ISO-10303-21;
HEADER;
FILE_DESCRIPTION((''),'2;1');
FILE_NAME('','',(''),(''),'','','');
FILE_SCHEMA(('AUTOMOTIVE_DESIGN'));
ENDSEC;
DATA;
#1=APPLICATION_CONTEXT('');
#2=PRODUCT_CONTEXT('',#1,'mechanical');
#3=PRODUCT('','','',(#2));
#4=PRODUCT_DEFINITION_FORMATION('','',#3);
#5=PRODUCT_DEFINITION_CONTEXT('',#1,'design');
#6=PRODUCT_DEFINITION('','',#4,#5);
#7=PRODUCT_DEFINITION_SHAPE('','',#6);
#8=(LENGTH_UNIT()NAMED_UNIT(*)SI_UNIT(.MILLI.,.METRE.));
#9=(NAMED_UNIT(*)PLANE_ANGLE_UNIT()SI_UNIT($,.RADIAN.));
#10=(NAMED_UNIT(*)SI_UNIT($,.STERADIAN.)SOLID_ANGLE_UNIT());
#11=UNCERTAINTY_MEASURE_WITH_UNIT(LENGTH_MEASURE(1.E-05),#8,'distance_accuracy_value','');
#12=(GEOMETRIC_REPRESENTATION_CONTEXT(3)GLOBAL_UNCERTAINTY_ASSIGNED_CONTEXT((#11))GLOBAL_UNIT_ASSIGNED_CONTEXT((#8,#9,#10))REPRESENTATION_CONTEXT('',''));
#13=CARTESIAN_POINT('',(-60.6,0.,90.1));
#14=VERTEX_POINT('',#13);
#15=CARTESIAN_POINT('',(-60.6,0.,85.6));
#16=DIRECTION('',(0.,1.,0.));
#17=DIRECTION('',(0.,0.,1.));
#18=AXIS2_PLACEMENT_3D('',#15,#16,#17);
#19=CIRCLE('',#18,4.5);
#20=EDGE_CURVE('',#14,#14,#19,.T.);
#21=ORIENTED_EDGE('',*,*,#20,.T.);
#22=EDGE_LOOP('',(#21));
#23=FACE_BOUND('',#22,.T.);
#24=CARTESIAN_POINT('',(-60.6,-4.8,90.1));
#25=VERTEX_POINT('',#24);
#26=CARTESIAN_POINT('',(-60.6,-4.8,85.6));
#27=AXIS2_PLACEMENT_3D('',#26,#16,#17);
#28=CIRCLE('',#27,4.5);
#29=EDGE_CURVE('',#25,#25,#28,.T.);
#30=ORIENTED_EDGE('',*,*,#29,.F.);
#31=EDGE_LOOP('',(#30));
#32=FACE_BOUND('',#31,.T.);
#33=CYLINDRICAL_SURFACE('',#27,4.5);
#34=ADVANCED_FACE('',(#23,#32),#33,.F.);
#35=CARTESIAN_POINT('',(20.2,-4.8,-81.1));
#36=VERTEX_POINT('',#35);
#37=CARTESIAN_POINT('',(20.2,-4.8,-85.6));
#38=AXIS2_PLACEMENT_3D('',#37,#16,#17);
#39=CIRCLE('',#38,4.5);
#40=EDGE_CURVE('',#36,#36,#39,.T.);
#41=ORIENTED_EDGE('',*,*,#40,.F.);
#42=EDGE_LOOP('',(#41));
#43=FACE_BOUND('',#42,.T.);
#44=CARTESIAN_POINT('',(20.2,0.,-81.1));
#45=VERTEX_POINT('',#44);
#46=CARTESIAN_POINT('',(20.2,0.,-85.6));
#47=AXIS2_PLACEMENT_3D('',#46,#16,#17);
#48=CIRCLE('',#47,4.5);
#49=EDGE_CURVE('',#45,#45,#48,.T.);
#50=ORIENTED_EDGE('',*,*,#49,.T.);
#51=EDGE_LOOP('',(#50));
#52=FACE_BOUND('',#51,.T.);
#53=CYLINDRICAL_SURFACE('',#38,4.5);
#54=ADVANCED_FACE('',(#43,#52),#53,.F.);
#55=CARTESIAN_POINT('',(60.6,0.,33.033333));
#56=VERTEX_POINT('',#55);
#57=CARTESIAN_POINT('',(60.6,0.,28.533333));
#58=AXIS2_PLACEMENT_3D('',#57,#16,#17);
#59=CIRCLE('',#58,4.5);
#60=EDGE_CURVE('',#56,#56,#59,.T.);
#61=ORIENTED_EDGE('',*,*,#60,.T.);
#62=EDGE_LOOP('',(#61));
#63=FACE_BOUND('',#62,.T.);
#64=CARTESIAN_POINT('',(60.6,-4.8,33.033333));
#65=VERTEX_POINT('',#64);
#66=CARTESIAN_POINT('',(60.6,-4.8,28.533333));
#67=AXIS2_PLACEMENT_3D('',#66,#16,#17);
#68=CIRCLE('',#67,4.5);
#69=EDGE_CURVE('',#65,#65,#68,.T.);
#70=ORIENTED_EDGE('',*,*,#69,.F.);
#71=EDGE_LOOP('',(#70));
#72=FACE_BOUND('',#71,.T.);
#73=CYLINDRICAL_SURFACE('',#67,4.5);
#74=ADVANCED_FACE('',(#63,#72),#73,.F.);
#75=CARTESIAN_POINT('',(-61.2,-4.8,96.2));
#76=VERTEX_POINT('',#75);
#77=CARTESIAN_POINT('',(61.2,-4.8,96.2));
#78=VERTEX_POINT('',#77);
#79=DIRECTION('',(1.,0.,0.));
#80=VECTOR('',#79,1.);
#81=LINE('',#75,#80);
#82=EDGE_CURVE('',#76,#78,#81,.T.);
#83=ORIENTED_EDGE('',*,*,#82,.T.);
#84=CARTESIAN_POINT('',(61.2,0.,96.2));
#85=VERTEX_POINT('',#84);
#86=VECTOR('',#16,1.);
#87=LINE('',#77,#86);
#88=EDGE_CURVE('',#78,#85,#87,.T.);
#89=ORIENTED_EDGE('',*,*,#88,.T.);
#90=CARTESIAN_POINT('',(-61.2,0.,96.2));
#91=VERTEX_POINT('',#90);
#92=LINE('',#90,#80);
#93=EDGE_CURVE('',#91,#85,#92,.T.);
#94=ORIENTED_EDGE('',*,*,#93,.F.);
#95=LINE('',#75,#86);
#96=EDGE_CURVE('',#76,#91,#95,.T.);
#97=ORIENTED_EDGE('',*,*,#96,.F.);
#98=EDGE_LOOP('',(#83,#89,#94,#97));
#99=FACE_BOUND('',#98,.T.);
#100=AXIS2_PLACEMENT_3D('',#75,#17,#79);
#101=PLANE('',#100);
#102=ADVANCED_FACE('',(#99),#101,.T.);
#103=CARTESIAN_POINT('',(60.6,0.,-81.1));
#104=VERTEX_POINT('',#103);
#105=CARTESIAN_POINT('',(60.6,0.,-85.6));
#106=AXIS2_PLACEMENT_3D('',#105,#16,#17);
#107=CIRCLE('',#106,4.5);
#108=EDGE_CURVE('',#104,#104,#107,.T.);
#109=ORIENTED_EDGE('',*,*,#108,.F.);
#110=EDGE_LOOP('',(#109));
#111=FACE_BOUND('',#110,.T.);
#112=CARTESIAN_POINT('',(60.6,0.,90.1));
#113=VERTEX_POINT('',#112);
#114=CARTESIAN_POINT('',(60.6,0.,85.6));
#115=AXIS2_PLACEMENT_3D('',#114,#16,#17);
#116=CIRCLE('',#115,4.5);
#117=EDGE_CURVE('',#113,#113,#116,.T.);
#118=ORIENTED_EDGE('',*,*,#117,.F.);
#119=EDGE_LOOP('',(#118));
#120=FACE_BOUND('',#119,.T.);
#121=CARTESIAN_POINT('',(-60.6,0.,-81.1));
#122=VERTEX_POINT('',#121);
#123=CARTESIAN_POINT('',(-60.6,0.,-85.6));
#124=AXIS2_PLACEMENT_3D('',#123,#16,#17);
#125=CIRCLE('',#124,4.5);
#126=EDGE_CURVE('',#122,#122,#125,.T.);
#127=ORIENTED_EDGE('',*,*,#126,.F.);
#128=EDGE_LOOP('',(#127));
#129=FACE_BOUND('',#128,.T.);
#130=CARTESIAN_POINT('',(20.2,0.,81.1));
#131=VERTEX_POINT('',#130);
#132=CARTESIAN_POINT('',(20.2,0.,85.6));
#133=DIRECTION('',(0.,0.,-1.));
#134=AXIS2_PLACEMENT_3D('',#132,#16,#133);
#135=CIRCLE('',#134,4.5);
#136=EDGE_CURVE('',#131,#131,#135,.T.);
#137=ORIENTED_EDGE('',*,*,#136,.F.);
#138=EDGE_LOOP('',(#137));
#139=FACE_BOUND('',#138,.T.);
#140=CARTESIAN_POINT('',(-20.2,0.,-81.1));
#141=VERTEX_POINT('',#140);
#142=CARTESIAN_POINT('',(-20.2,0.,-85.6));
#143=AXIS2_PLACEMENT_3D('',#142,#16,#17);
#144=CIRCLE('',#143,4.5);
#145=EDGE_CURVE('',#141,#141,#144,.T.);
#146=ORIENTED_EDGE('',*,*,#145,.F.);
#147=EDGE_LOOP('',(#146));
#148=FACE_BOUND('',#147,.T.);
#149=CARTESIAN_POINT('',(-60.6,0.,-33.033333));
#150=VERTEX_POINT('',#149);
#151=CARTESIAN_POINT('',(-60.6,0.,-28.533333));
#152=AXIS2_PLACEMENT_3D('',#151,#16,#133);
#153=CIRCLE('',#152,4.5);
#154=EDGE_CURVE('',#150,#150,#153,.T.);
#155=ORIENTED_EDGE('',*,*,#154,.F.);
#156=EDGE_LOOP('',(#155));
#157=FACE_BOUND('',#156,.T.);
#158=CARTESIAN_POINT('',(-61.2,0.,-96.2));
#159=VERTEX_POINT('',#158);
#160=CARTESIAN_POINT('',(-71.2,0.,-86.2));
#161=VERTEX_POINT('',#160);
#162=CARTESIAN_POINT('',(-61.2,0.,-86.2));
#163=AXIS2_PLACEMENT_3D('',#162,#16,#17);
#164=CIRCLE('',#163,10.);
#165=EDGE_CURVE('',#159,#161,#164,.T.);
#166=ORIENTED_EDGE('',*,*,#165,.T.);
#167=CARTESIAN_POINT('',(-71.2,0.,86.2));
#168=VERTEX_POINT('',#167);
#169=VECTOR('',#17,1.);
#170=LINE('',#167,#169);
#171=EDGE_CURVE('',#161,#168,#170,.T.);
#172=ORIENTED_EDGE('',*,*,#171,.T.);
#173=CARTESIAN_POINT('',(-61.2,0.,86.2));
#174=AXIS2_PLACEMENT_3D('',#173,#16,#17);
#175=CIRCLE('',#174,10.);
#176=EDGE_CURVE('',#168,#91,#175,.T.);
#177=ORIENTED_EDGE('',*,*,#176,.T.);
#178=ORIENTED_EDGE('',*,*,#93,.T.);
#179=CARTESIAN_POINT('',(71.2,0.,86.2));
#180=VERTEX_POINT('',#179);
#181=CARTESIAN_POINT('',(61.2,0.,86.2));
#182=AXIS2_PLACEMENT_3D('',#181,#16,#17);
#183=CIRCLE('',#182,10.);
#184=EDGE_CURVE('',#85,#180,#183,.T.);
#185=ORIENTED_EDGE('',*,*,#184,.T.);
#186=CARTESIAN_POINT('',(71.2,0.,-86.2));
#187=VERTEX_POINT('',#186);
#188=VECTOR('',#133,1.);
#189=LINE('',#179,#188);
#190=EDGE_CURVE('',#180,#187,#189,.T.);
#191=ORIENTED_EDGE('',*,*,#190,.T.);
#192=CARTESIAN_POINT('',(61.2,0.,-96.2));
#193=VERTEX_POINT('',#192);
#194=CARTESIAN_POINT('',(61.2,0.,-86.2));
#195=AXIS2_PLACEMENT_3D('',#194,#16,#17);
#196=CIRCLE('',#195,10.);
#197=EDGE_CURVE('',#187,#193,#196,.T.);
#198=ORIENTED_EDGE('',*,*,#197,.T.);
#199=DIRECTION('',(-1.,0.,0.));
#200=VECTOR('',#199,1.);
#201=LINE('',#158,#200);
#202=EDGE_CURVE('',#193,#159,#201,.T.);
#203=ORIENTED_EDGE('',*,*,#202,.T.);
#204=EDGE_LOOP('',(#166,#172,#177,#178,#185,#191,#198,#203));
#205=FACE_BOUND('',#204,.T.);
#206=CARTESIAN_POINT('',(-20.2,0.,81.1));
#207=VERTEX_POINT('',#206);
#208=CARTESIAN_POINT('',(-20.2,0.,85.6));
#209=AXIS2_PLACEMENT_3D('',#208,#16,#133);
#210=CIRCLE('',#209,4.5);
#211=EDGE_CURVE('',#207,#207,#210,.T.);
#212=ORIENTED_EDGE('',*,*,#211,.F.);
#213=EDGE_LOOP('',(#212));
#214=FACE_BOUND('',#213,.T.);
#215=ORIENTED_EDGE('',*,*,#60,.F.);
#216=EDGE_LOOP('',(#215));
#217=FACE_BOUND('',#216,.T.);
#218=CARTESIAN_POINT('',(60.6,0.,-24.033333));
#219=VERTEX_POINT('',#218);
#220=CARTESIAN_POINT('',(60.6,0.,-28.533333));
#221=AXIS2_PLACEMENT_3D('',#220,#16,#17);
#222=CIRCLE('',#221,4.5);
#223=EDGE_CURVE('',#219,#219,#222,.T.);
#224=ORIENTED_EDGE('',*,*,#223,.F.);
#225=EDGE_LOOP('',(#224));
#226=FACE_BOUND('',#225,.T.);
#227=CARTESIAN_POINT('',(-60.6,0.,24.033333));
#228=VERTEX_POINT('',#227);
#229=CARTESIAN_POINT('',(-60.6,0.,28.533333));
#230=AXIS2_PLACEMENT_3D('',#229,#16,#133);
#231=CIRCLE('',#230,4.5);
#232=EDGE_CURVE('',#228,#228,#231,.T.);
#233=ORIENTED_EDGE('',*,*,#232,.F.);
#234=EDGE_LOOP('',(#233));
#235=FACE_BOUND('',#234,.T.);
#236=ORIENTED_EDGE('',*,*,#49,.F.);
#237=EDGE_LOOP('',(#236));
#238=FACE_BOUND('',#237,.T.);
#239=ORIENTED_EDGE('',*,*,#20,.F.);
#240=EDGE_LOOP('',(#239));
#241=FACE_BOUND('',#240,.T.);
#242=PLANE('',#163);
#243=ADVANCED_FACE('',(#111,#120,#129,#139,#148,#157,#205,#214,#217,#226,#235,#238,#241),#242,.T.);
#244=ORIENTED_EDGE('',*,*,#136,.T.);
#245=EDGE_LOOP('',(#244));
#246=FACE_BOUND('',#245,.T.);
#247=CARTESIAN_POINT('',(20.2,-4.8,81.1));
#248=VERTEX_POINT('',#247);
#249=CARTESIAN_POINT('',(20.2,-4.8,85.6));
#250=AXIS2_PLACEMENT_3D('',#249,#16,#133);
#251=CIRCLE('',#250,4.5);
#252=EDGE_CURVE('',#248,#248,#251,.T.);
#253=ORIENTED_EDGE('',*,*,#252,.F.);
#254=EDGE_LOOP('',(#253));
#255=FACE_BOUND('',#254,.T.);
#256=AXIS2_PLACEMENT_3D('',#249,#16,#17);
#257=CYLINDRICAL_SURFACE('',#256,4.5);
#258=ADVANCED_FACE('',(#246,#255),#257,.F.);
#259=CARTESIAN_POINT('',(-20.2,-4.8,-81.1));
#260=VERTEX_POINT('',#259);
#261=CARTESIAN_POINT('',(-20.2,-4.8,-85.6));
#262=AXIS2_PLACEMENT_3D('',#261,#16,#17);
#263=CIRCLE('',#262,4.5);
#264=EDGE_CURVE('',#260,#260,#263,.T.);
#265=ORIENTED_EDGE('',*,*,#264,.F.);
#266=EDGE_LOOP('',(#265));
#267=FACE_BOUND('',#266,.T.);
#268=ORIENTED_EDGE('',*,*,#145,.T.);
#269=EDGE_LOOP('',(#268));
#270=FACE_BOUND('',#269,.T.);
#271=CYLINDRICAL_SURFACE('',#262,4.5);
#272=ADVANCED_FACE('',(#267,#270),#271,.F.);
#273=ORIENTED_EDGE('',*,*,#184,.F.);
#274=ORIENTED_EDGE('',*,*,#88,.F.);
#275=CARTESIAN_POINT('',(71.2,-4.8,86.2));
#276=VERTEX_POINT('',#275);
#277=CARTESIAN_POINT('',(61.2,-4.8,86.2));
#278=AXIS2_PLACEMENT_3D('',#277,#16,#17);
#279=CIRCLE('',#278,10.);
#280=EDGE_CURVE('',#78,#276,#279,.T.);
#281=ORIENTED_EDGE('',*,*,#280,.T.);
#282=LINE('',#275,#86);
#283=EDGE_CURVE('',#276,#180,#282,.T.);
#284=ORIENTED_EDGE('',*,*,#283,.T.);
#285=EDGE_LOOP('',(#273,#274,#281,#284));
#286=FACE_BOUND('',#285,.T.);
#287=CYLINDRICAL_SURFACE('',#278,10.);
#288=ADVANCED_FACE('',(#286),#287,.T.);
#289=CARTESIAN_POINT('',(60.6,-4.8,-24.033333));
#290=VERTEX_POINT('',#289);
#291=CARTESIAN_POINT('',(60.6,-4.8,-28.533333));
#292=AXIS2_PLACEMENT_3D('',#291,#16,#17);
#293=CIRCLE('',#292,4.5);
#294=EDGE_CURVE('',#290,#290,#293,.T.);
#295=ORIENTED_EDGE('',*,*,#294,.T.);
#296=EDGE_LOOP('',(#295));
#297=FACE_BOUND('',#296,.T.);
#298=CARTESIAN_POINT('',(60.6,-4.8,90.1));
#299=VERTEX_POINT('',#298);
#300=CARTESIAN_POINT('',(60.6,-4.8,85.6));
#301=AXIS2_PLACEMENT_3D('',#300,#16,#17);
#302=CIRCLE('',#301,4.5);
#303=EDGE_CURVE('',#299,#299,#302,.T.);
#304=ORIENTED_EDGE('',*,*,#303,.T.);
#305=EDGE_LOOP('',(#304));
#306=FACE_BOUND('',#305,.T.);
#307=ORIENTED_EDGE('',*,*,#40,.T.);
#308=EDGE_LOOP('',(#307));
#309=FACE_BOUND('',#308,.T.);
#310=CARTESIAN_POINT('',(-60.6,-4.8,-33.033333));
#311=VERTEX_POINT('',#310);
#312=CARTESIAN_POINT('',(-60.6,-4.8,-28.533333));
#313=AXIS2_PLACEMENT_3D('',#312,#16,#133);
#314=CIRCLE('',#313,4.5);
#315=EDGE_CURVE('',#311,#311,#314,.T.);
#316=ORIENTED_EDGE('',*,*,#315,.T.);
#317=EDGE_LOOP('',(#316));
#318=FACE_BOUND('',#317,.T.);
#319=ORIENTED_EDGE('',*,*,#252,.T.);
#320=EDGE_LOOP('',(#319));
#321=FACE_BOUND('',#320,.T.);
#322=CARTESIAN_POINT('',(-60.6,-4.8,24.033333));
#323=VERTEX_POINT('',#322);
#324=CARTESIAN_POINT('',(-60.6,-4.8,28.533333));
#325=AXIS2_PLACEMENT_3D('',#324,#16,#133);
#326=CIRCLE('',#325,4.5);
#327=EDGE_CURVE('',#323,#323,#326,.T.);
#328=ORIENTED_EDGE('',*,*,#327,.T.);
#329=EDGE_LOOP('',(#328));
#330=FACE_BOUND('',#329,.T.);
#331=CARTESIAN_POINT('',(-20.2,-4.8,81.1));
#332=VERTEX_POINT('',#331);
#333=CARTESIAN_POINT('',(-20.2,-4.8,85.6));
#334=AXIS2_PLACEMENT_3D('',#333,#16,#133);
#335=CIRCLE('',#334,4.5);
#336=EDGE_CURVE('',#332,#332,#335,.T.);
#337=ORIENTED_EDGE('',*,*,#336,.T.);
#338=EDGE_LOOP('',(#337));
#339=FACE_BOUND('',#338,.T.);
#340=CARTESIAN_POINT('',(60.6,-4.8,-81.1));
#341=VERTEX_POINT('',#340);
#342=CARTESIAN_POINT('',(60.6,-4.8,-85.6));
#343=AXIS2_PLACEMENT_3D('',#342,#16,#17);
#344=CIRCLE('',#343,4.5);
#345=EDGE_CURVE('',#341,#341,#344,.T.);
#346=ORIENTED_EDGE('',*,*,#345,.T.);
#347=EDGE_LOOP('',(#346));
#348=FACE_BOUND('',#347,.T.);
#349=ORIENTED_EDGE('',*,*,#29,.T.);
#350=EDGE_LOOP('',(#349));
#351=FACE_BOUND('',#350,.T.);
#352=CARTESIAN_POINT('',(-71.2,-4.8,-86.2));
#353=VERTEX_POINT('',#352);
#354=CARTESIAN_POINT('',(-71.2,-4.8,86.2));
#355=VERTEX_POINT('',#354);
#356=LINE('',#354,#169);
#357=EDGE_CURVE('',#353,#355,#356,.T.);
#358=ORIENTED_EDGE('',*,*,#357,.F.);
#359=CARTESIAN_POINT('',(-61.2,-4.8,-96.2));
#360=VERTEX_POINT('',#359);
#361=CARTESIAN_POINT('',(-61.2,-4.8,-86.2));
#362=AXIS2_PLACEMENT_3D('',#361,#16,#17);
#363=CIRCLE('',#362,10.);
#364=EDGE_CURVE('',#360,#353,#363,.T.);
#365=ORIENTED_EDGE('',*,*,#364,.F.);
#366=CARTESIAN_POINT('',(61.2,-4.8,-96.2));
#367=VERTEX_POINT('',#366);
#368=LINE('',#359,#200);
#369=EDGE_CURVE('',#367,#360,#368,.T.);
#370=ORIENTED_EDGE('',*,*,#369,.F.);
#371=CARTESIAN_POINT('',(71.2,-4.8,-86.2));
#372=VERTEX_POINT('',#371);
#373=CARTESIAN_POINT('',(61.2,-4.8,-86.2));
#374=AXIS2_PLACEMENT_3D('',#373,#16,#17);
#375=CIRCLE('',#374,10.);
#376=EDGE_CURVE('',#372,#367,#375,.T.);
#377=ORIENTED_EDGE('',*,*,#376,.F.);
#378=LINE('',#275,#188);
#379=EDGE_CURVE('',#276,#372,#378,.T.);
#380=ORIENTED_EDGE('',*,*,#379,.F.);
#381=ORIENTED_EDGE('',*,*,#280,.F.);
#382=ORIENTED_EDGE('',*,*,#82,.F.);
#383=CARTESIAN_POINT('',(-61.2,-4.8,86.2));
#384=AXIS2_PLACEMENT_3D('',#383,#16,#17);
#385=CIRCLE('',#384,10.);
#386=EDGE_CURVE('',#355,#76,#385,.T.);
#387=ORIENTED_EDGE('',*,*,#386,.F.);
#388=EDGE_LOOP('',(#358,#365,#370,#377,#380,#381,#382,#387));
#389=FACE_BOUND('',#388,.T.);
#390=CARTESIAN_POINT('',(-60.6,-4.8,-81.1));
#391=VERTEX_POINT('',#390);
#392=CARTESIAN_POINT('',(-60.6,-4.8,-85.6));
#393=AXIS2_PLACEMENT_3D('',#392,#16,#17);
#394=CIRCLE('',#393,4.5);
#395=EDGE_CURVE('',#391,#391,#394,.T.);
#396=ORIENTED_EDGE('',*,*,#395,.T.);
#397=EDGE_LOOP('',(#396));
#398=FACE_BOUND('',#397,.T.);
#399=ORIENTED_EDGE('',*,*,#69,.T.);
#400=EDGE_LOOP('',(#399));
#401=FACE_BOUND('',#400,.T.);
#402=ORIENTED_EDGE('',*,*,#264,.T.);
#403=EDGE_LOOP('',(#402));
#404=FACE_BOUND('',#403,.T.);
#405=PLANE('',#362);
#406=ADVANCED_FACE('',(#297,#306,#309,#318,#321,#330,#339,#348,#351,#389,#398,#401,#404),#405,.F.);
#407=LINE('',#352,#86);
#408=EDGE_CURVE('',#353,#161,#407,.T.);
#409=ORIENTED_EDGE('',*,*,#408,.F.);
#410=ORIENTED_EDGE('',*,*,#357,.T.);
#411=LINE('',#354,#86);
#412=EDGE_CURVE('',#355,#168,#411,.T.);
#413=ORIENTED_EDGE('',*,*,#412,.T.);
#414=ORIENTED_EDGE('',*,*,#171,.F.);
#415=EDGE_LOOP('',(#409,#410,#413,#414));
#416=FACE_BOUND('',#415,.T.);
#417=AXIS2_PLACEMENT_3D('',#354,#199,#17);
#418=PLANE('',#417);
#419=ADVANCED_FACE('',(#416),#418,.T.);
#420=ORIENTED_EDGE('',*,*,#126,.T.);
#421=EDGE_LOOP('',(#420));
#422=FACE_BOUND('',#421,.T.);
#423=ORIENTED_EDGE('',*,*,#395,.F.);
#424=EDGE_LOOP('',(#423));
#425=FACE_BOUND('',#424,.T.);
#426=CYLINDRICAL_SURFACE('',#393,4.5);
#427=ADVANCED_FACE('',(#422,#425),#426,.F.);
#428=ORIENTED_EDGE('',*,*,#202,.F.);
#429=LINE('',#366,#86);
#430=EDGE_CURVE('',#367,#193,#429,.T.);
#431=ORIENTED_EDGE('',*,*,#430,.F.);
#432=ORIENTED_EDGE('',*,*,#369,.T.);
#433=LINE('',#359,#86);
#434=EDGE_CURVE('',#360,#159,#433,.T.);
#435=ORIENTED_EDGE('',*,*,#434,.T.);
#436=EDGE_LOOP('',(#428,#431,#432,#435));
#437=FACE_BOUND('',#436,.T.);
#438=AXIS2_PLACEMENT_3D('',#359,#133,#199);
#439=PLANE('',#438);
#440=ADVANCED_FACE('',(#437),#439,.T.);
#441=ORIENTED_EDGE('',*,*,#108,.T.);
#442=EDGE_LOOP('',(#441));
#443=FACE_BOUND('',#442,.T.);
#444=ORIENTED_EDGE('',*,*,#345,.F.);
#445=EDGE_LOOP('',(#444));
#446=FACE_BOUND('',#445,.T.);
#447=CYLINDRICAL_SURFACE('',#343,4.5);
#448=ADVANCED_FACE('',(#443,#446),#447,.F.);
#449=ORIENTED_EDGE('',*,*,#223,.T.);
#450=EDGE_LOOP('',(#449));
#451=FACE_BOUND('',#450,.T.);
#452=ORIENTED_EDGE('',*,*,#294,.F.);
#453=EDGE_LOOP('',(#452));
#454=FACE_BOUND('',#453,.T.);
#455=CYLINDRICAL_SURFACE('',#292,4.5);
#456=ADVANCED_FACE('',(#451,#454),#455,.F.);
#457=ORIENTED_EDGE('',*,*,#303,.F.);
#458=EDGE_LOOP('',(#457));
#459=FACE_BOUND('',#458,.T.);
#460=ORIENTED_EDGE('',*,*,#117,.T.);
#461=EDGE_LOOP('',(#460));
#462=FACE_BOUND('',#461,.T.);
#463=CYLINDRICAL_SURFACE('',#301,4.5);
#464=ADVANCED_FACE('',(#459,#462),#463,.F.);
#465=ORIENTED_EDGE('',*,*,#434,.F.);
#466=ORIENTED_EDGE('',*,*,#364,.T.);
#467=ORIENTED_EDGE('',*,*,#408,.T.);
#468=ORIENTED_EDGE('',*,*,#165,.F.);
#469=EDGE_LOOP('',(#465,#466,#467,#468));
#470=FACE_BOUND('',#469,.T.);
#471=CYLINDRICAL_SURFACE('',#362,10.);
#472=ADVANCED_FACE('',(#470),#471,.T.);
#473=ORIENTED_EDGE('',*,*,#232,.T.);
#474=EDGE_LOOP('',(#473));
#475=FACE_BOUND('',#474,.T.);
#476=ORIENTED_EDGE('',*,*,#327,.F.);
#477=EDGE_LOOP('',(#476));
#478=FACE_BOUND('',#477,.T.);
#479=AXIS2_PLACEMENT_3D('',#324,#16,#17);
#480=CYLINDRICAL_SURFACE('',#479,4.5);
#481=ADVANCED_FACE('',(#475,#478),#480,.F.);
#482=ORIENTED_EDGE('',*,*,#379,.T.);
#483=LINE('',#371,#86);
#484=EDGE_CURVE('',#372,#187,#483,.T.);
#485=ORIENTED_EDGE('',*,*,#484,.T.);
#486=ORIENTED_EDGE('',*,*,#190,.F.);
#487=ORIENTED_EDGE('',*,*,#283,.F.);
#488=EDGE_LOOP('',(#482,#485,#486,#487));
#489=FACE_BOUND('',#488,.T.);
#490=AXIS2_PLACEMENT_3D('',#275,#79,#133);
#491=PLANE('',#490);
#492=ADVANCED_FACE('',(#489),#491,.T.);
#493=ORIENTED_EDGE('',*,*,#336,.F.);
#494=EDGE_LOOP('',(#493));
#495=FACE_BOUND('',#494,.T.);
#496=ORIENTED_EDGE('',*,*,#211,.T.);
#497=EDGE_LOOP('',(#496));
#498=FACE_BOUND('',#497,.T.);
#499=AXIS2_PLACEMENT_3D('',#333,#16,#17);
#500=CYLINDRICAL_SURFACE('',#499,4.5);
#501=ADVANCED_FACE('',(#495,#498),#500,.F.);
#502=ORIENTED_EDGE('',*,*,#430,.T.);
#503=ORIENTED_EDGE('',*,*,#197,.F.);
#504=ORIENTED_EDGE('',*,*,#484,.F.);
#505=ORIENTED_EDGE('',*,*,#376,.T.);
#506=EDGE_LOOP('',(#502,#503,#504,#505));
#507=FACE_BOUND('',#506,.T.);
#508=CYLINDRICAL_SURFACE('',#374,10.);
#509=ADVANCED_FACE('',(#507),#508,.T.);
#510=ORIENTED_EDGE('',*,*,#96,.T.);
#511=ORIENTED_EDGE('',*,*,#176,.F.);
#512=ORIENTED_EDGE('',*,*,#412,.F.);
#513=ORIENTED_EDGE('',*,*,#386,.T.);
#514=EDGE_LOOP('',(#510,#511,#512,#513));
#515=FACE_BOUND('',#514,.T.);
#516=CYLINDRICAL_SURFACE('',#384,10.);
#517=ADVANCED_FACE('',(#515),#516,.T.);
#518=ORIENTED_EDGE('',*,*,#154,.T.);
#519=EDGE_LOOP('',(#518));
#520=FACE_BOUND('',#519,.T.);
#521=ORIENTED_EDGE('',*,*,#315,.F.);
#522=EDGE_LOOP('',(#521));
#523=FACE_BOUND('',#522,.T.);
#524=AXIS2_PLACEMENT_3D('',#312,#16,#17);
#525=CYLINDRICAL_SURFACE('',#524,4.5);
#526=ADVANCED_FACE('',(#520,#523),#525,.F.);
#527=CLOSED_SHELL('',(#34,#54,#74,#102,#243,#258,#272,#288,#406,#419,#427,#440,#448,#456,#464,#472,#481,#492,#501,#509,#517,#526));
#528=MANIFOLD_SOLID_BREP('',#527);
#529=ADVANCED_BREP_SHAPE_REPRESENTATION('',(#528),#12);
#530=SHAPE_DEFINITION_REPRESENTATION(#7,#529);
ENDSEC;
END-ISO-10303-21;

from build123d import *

# Parameters (mm, degrees)
ESBO_O1_R          = 4.5
FLANGE_BASE1_DEPTH = 4.8


# Sheet-metal steps are written as plain solids
with BuildPart() as part:
    # Esboço1 → Flange-base1 (new body)
    with BuildSketch(Plane(origin=(0, 0, 0), x_dir=(1, 0, 0), z_dir=(0, 1, 0))):
        with BuildLine():
            Line((-61.2, -96.2), (61.2, -96.2))
            ThreePointArc((61.2, -96.2), (68.271067812, -93.271067812), (71.2, -86.2))
            Line((71.2, -86.2), (71.2, 86.2))
            ThreePointArc((71.2, 86.2), (68.271067812, 93.271067812), (61.2, 96.2))
            Line((61.2, 96.2), (-61.2, 96.2))
            ThreePointArc((-61.2, 96.2), (-68.271067812, 93.271067812), (-71.2, 86.2))
            Line((-71.2, 86.2), (-71.2, -86.2))
            ThreePointArc((-71.2, -86.2), (-68.271067812, -93.271067812), (-61.2, -96.2))
        make_face()
        with Locations(Location((-60.6, 85.6, 0), (0, 0, 270))):
            Circle(ESBO_O1_R, mode=Mode.SUBTRACT)
        with Locations(Location((60.6, 85.6, 0), (0, 0, 270))):
            Circle(ESBO_O1_R, mode=Mode.SUBTRACT)
        with Locations(Location((-60.6, -85.6, 0), (0, 0, 270))):
            Circle(ESBO_O1_R, mode=Mode.SUBTRACT)
        with Locations(Location((60.6, -85.6, 0), (0, 0, 270))):
            Circle(ESBO_O1_R, mode=Mode.SUBTRACT)
        with Locations(Location((-20.2, 85.6, 0), (0, 0, 270))):
            Circle(ESBO_O1_R, mode=Mode.SUBTRACT)
        with Locations(Location((20.2, 85.6, 0), (0, 0, 270))):
            Circle(ESBO_O1_R, mode=Mode.SUBTRACT)
        with Locations(Location((60.6, 28.533333333, 0), (0, 0, 270))):
            Circle(ESBO_O1_R, mode=Mode.SUBTRACT)
        with Locations(Location((60.6, -28.533333333, 0), (0, 0, 270))):
            Circle(ESBO_O1_R, mode=Mode.SUBTRACT)
        with Locations(Location((20.2, -85.6, 0), (0, 0, 90))):
            Circle(ESBO_O1_R, mode=Mode.SUBTRACT)
        with Locations(Location((-20.2, -85.6, 0), (0, 0, 90))):
            Circle(ESBO_O1_R, mode=Mode.SUBTRACT)
        with Locations(Location((-60.6, -28.533333333, 0), (0, 0, 90))):
            Circle(ESBO_O1_R, mode=Mode.SUBTRACT)
        with Locations(Location((-60.6, 28.533333333, 0), (0, 0, 90))):
            Circle(ESBO_O1_R, mode=Mode.SUBTRACT)
    extrude(amount=-FLANGE_BASE1_DEPTH)


solid = part.part
